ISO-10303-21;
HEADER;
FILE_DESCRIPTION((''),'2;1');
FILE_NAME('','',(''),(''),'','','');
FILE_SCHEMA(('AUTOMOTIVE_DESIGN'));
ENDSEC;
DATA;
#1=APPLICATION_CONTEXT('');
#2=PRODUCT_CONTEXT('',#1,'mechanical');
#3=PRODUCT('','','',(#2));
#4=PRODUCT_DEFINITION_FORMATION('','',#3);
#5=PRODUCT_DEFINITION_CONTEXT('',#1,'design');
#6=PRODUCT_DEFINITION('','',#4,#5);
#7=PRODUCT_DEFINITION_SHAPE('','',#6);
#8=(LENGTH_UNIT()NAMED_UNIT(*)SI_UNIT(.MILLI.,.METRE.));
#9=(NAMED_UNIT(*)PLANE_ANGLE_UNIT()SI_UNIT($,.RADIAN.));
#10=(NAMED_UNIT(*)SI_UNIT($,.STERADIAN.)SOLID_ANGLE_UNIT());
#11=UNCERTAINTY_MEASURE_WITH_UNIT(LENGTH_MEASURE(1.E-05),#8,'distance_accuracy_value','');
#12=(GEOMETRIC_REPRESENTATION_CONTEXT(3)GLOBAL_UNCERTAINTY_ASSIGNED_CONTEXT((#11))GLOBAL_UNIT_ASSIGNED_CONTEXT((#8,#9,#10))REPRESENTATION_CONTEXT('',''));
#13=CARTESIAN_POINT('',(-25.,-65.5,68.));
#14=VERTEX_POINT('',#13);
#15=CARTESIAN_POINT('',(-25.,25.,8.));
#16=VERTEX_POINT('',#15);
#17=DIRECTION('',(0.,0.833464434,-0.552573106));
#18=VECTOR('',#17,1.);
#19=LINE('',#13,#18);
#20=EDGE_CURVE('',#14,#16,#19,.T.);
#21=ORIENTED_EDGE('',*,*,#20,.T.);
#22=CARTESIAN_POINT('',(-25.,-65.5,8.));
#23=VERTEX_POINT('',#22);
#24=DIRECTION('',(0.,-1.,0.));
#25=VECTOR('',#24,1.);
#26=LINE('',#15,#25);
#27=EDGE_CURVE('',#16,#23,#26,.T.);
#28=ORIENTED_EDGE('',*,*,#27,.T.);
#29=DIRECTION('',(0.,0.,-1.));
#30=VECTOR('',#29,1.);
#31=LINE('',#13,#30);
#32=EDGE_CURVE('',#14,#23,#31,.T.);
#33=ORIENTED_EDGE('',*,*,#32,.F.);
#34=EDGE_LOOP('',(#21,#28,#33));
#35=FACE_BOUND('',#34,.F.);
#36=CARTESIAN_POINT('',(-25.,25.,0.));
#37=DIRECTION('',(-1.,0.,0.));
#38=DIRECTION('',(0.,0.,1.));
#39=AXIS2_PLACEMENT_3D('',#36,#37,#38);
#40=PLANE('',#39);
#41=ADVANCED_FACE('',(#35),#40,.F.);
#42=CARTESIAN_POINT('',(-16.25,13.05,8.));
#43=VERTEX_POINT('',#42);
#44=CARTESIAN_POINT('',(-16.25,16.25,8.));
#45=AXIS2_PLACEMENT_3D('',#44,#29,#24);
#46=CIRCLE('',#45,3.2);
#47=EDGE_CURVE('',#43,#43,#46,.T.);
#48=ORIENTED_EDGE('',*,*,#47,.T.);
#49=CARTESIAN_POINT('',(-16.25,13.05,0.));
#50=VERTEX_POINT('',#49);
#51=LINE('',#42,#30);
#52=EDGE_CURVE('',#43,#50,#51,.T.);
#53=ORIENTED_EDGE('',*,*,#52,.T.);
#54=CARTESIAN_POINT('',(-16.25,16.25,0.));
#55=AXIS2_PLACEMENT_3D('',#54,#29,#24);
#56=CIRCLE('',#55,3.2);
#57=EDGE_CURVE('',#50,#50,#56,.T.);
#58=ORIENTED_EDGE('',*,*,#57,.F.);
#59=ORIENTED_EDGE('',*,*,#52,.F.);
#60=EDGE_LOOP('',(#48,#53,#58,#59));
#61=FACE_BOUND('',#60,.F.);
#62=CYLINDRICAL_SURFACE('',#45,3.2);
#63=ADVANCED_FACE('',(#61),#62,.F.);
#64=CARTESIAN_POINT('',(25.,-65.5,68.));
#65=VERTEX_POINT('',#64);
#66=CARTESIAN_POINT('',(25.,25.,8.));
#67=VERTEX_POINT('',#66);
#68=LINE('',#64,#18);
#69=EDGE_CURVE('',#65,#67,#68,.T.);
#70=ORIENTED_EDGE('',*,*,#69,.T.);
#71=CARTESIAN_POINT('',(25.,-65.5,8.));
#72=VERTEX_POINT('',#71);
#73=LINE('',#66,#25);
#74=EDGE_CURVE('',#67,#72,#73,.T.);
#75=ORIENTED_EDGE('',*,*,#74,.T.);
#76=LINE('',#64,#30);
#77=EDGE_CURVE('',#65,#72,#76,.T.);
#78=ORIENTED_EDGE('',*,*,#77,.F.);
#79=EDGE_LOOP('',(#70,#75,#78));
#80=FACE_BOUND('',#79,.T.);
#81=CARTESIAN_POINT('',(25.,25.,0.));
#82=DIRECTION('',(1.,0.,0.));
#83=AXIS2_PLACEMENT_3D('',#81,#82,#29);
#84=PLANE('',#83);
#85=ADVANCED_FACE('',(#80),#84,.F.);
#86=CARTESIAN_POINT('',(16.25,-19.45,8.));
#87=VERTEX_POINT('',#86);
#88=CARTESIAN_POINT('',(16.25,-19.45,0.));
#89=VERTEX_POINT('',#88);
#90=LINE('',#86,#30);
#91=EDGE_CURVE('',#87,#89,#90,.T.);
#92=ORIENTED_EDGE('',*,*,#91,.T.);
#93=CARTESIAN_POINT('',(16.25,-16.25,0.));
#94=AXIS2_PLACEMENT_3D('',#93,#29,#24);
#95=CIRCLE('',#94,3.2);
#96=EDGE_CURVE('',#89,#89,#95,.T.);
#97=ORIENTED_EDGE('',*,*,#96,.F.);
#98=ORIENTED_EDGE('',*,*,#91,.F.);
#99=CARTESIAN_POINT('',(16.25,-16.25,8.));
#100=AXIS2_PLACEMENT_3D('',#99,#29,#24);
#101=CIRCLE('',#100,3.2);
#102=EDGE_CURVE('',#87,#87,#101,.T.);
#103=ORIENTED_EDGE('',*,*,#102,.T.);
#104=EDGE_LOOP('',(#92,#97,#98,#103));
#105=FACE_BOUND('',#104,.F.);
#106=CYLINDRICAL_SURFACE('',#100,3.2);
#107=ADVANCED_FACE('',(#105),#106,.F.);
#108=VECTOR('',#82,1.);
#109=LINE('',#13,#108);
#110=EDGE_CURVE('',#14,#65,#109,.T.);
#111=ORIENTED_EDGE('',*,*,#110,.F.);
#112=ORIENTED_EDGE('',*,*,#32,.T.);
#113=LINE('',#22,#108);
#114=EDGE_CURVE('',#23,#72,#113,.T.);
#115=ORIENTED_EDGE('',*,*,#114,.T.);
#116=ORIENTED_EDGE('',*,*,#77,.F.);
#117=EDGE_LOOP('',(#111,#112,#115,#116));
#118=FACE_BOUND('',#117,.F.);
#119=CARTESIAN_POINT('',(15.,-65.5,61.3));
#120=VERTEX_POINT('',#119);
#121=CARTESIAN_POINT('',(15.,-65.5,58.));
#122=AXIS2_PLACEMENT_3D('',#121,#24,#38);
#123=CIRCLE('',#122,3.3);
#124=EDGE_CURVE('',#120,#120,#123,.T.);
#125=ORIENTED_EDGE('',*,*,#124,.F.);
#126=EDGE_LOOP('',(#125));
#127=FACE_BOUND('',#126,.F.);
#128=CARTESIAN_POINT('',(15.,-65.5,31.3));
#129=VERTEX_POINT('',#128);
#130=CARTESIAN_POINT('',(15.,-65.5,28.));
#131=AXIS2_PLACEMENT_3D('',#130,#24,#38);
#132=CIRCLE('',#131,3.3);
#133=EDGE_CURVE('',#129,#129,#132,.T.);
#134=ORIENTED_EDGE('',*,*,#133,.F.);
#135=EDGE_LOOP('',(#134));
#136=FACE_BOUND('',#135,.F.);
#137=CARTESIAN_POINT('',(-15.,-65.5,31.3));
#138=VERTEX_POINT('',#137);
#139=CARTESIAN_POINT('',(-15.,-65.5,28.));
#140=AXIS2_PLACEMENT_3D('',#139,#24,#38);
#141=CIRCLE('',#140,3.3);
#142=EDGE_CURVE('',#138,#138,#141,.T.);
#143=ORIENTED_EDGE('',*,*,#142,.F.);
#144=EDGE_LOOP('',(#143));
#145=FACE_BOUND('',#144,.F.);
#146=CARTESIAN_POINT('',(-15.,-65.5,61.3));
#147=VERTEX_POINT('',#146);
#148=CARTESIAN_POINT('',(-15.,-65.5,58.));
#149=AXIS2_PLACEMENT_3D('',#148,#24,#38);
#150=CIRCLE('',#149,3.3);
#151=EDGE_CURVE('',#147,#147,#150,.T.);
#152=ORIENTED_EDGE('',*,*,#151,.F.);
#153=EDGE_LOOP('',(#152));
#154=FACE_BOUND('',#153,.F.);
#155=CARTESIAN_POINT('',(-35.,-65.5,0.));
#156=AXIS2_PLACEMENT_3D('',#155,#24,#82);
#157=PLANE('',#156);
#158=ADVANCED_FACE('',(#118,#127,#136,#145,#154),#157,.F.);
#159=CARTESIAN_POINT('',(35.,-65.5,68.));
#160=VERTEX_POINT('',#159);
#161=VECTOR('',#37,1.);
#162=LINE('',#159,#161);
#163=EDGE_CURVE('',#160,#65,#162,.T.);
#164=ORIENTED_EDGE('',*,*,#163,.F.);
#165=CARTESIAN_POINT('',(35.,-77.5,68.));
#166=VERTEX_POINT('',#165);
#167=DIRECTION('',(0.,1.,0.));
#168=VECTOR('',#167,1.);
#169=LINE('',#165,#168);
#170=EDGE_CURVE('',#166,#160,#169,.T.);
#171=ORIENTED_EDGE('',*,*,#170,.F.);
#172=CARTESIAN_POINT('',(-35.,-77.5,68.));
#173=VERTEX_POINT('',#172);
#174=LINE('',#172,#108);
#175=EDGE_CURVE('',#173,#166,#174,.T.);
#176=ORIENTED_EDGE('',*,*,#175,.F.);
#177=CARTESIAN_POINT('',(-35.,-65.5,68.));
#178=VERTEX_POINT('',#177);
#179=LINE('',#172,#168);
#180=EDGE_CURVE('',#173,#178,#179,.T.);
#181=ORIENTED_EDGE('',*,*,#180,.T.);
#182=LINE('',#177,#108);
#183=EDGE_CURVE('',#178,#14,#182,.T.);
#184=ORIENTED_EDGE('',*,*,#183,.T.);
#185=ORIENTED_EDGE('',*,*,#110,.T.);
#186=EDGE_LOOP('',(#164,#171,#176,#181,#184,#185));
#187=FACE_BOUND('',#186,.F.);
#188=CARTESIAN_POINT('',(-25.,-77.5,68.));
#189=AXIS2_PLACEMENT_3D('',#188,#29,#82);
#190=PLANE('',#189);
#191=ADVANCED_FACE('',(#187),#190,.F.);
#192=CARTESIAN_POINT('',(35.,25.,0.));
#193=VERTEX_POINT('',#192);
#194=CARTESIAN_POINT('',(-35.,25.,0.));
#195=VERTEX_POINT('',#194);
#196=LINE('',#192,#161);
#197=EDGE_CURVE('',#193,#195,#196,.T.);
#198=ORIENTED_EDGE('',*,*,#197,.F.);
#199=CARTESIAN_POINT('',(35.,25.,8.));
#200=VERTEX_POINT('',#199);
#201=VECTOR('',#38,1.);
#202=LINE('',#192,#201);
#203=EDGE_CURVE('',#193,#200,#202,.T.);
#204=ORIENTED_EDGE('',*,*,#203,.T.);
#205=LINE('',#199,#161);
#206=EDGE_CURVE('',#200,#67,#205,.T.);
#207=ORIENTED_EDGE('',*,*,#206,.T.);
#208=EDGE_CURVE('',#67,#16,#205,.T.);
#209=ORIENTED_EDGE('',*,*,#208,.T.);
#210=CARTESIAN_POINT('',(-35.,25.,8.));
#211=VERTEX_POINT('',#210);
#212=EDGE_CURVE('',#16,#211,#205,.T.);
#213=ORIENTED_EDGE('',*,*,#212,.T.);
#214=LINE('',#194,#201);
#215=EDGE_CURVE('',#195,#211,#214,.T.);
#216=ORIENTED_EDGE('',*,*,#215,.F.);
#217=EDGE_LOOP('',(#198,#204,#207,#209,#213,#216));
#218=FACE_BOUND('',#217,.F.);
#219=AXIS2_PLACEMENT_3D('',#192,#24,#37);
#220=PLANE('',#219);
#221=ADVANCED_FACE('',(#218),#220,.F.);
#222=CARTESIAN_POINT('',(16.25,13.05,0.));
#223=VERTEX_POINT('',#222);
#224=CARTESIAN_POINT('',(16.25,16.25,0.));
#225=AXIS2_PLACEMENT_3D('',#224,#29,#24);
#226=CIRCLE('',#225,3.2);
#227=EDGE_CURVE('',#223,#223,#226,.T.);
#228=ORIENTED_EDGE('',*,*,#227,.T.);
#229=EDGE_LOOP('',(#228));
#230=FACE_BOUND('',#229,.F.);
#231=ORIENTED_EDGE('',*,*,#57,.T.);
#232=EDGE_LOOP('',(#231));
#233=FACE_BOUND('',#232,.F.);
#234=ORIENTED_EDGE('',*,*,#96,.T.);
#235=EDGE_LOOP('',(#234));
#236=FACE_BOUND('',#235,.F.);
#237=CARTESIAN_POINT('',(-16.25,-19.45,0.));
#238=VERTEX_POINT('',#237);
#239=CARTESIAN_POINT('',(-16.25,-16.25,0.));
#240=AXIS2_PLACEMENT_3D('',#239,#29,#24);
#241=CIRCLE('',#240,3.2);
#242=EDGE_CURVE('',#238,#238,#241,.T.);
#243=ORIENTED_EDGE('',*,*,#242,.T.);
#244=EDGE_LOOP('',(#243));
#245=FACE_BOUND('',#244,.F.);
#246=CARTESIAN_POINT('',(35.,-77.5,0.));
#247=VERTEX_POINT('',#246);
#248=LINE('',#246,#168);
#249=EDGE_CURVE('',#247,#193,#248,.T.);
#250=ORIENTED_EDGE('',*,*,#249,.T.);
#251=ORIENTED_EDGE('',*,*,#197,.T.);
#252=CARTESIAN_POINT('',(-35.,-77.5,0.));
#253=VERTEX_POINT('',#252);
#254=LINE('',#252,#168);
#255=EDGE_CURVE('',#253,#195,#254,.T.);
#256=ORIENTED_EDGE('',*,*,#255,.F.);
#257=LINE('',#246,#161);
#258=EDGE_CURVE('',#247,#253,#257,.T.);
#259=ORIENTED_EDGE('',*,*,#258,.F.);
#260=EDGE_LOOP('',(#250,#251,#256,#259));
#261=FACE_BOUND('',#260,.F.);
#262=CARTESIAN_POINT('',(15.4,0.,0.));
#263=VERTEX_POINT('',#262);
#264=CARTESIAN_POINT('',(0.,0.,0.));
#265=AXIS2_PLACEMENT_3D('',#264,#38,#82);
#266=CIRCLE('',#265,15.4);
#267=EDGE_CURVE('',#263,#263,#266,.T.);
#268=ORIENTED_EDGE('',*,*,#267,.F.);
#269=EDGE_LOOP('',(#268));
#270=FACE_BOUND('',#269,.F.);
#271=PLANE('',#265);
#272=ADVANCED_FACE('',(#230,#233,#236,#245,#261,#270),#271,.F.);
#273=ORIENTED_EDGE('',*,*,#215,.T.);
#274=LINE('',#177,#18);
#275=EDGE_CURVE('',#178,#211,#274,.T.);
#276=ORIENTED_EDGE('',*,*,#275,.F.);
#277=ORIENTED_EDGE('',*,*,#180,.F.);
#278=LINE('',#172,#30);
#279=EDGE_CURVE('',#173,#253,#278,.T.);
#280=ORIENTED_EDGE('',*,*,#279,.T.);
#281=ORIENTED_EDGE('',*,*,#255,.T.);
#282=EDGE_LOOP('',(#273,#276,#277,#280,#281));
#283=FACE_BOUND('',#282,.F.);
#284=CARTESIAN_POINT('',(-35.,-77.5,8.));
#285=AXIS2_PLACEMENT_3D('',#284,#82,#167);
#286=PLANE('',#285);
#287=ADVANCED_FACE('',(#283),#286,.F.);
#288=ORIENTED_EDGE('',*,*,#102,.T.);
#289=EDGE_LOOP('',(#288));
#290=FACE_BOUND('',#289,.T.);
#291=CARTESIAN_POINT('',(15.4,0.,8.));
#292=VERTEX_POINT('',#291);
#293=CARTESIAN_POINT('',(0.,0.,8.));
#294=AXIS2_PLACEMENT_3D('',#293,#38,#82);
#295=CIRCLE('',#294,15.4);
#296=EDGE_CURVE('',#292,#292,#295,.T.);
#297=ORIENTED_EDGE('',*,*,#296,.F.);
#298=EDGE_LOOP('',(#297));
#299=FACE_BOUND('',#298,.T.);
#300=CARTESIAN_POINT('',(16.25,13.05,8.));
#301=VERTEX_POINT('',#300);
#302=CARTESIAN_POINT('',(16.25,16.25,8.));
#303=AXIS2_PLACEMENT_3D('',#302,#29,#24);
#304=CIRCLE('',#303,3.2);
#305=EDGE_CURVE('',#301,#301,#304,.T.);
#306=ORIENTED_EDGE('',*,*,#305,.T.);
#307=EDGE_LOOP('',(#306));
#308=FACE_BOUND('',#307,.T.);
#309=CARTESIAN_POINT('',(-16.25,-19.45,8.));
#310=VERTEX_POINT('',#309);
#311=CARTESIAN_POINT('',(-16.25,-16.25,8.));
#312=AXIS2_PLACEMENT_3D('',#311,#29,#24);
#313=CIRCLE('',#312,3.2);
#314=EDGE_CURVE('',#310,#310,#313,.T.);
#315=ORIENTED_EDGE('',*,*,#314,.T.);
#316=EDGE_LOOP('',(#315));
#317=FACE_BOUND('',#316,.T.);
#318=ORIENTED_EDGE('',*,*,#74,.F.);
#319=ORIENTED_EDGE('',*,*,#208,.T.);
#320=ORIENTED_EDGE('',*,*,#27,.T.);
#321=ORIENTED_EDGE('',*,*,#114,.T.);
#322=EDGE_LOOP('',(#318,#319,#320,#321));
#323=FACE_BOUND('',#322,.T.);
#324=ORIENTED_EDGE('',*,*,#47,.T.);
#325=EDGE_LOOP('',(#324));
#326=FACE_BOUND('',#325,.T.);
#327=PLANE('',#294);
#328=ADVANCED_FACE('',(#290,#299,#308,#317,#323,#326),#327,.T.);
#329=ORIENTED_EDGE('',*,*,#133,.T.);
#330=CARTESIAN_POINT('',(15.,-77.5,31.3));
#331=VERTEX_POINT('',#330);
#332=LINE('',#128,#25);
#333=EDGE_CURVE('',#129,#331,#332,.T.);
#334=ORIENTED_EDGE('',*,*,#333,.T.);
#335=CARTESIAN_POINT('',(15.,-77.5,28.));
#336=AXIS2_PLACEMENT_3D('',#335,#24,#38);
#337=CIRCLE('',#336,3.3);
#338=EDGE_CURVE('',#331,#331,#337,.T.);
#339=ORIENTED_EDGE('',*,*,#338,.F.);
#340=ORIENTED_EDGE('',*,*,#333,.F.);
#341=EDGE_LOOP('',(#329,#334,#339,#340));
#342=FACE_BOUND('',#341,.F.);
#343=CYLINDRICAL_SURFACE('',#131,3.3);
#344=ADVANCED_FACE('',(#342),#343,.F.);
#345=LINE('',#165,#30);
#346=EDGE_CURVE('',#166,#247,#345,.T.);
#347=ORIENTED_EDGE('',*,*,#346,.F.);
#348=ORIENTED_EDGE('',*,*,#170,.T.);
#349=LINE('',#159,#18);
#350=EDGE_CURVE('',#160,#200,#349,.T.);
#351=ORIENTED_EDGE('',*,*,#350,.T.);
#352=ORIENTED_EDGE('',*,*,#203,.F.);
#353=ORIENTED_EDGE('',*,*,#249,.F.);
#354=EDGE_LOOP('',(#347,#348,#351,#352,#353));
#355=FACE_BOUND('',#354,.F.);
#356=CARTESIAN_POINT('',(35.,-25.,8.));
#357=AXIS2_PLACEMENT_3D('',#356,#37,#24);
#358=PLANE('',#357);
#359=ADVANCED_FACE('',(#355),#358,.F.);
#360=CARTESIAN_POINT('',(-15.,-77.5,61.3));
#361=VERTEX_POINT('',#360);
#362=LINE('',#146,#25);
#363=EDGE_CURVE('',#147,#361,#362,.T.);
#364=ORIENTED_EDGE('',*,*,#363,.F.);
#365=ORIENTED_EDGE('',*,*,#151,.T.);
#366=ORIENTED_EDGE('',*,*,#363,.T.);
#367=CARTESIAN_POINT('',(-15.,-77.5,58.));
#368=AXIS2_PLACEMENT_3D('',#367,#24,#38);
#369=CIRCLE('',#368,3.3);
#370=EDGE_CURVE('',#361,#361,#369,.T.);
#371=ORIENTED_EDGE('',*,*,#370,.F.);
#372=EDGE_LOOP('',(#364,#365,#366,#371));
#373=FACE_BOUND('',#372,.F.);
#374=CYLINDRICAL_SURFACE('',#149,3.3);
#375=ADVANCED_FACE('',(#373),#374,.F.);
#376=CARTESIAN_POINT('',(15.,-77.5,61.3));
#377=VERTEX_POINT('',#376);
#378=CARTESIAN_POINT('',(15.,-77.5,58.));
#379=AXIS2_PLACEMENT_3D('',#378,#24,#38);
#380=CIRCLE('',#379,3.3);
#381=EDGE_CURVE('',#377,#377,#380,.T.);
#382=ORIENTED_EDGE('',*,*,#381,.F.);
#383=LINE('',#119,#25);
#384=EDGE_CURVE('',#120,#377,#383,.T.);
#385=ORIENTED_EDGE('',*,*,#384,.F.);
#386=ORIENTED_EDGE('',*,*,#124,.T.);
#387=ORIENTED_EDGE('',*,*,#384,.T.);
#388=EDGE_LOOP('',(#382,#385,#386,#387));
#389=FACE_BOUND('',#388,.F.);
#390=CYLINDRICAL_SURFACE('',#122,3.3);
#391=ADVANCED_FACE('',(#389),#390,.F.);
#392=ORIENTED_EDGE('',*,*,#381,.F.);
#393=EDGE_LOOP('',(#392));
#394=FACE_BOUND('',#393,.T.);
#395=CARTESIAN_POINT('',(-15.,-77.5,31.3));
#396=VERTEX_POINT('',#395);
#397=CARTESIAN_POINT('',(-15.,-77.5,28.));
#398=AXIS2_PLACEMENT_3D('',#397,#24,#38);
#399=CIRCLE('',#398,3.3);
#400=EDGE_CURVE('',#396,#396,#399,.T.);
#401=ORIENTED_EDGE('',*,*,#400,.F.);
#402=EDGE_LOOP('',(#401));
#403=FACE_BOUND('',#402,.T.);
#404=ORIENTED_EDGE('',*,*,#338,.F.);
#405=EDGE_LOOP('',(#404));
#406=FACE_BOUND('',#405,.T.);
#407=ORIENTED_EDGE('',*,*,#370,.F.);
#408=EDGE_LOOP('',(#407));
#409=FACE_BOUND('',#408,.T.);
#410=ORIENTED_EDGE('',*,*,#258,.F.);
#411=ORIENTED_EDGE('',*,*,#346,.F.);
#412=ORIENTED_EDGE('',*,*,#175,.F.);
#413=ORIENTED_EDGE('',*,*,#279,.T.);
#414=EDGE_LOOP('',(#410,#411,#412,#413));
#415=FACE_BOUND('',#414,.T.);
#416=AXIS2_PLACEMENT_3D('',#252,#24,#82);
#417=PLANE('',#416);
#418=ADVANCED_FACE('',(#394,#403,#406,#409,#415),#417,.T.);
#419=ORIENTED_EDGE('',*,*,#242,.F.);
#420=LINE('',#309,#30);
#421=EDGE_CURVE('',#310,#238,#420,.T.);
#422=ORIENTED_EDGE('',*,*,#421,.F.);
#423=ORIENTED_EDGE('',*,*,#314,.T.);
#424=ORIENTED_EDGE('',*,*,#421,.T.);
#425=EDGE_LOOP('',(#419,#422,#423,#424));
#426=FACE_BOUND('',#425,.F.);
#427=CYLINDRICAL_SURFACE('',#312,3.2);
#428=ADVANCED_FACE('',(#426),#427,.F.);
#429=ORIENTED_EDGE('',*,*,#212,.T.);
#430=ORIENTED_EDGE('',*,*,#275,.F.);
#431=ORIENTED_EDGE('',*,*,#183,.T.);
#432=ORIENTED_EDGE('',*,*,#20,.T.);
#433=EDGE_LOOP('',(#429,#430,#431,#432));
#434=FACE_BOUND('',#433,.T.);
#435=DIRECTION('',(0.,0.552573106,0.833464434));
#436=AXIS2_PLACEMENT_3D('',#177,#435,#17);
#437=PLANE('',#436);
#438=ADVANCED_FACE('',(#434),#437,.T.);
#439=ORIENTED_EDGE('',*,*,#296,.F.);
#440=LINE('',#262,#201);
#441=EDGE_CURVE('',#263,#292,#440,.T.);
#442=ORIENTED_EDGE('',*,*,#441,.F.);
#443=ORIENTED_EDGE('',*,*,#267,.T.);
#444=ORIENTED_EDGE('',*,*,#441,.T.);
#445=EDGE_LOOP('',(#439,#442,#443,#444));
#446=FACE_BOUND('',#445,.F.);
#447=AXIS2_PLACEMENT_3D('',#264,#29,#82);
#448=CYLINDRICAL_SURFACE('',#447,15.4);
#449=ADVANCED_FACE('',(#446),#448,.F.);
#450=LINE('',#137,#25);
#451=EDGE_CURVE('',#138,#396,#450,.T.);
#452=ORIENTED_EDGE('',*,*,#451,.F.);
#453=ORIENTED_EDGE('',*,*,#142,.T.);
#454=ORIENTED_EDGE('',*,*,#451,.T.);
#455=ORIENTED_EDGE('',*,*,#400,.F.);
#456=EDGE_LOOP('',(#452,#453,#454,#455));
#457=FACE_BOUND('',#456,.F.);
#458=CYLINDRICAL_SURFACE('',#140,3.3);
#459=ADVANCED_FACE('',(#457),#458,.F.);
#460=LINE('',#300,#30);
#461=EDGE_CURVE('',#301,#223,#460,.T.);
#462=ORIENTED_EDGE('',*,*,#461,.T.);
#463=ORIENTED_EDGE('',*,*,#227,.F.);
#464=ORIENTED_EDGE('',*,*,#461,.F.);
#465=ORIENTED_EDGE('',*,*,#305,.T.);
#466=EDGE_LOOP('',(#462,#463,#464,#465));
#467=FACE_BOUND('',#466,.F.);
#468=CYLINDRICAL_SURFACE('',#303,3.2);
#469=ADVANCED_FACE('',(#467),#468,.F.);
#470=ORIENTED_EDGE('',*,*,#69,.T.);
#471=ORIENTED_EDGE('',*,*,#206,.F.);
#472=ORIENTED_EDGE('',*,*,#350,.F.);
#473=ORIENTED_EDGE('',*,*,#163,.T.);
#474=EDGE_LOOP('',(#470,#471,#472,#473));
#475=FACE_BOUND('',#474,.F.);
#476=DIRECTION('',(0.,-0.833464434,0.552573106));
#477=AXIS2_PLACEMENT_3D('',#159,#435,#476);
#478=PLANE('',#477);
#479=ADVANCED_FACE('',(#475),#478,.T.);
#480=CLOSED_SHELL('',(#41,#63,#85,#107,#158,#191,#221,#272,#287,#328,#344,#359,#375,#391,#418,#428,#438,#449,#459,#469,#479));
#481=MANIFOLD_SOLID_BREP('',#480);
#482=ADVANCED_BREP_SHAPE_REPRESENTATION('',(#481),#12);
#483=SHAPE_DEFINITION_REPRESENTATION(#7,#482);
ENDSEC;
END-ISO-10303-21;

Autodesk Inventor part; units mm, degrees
ref_plane "YZ Plane" through (0, 0, 0) normal (1, 0, 0) x (0, 1, 0)
ref_plane "XZ Plane" through (0, 0, 0) normal (0, 1, 0) x (-1, 0, 0)
ref_plane "XY Plane" through (0, 0, 0) normal (0, 0, 1) x (1, 0, 0)
sketch "Sketch1" plane through (0, 0, 0) normal (0, 0, 1) x (1, 0, 0)
  line L0 (-35, -25) -> (35, -25)
  line L1 (35, -25) -> (35, 25)
  line L2 (35, 25) -> (-35, 25)
  line L3 (-35, 25) -> (-35, -25)
  line L4 (-35, -25) -> (35, 25) construction
  line L5 (35, -25) -> (-35, 25) construction
  circle A0 centre (0, 0) radius 15.4
  dimension "d0" = 70
  dimension "d1" = 50
  dimension "d2" = 30.8
extrude "Extrusion1" add sketch "Sketch1" along normal blind 8
sketch "Sketch2" plane through (0, 0, 8) normal (0, 0, 1) x (1, 0, 0)
  line L0 (35, -25) -> (35, 25) projected
  line L1 (35, 25) -> (-35, 25) projected
  line L2 (-35, 25) -> (-35, -25) projected
  line L3 (-35, -25) -> (35, -25) projected
  circle A0 centre (0, 0) radius 15.4 projected
  line L4 (16.25, -16.25) -> (-16.25, -16.25) construction
  line L5 (-16.25, -16.25) -> (-16.25, 16.25) construction
  line L6 (-16.25, 16.25) -> (16.25, 16.25) construction
  line L7 (16.25, 16.25) -> (16.25, -16.25) construction
  line L8 (16.25, -16.25) -> (-16.25, 16.25) construction
  line L9 (-16.25, -16.25) -> (16.25, 16.25) construction
  dimension "d5" = 32.5
  dimension "d6" = 32.5
hole "Hole1" at (-16.25, 16.25, 8) at (16.25, 16.25, 8) at (16.25, -16.25, 8) at (-16.25, -16.25, 8) direction (0, 0, -1) diameter 6.4 end through all clearance for "Hex Head Cap Screw ISO 24017" size "M6" standard "ISO"
sketch "Sketch3" plane through (0, 0, 8) normal (0, 0, 1) x (1, 0, 0)
  circle A0 centre (0, 0) radius 15.4 projected
  circle A1 centre (-16.25, -16.25) radius 3.2 projected
  circle A2 centre (16.25, -16.25) radius 3.2 projected
  circle A3 centre (16.25, 16.25) radius 3.2 projected
  circle A4 centre (-16.25, 16.25) radius 3.2 projected
  line L0 (35, -25) -> (35, 25) projected
  line L1 (35, 25) -> (-35, 25) projected
  line L2 (-35, 25) -> (-35, -25) projected
  line L3 (-35, -25) -> (35, -25) projected
  circle A5 centre (0, 0) radius 15.4 projected
  line L4 (-35, -25) -> (35, -25)
  line L5 (35, -25) -> (35, -77.5)
  line L6 (35, -77.5) -> (-35, -77.5)
  line L7 (-35, -77.5) -> (-35, -25)
  dimension "d14" = 77.5
extrude "Extrusion2" add sketch "Sketch3" against normal up to surface (8 mm away) contours L5 L6 L7 L3
sketch "Sketch4" plane through (-35, 25, 0) normal (-1, 0, 0) x (0, 0, 1)
  line L0 (0, 0) -> (0, -102.5) projected
  line L1 (8, -102.5) -> (0, -102.5) projected
  line L2 (8, 0) -> (8, -102.5) projected
  line L3 (0, 0) -> (8, 0) projected
  line L4 (8, -102.5) -> (68, -102.5)
  line L5 (68, -102.5) -> (68, -90.5)
  line L6 (68, -90.5) -> (8, -90.5)
  line L7 (8, -90.5) -> (8, -102.5)
  line L8 (68, -90.5) -> (8, 0)
  point P0 (0, -25)
  dimension "d17" = 60
  dimension "d18" = 12
extrude "Extrusion3" add sketch "Sketch4" against normal blind 10 contours L8 L6 L2 | L2 L6 L5 L4
mirror "Mirror1" about plane through (0, 0, 0) normal (1, 0, 0) of "Extrusion3"
sketch "Sketch5" plane through (-35, -77.5, 0) normal (0, -1, 0) x (1, 0, 0)
  line L0 (10, 68) -> (10, 8) projected
  line L1 (60, 68) -> (60, 8) projected
  line L2 (10, 8) -> (60, 8) projected
  line L3 (10, 68) -> (60, 68)
  point P0 (35, 0)
extrude "Extrusion4" add sketch "Sketch5" against normal blind 12
sketch "Sketch6" plane through (-35, -65.5, 0) normal (0, 1, 0) x (1, 0, 0)
  line L0 (10, -68) -> (10, -8) projected
  line L1 (10, -68) -> (60, -68) projected
  line L2 (60, -8) -> (60, -68) projected
  line L3 (10, -8) -> (60, -8) projected
  line L4 (50, -18) -> (50, -58) construction
  line L5 (50, -58) -> (20, -58) construction
  line L6 (20, -58) -> (20, -18) construction
  line L7 (20, -18) -> (50, -18) construction
  point P0 (35, 0)
  dimension "d23" = 10
hole "Hole2" at (-15, -65.5, 18) at (-15, -65.5, 58) at (15, -65.5, 18) at (15, -65.5, 58) direction (0, -1, 0) diameter 6.6 end through all clearance for "Hex Head Cap Screw ISO 24017" size "M6" standard "ISO"
move faces "Move1" translate (0, 0, 10) faces at (15.2655, -69.5, 21.2893) (-14.7345, -69.5, 21.2893)
properties part number "Part6_3DPrint"
